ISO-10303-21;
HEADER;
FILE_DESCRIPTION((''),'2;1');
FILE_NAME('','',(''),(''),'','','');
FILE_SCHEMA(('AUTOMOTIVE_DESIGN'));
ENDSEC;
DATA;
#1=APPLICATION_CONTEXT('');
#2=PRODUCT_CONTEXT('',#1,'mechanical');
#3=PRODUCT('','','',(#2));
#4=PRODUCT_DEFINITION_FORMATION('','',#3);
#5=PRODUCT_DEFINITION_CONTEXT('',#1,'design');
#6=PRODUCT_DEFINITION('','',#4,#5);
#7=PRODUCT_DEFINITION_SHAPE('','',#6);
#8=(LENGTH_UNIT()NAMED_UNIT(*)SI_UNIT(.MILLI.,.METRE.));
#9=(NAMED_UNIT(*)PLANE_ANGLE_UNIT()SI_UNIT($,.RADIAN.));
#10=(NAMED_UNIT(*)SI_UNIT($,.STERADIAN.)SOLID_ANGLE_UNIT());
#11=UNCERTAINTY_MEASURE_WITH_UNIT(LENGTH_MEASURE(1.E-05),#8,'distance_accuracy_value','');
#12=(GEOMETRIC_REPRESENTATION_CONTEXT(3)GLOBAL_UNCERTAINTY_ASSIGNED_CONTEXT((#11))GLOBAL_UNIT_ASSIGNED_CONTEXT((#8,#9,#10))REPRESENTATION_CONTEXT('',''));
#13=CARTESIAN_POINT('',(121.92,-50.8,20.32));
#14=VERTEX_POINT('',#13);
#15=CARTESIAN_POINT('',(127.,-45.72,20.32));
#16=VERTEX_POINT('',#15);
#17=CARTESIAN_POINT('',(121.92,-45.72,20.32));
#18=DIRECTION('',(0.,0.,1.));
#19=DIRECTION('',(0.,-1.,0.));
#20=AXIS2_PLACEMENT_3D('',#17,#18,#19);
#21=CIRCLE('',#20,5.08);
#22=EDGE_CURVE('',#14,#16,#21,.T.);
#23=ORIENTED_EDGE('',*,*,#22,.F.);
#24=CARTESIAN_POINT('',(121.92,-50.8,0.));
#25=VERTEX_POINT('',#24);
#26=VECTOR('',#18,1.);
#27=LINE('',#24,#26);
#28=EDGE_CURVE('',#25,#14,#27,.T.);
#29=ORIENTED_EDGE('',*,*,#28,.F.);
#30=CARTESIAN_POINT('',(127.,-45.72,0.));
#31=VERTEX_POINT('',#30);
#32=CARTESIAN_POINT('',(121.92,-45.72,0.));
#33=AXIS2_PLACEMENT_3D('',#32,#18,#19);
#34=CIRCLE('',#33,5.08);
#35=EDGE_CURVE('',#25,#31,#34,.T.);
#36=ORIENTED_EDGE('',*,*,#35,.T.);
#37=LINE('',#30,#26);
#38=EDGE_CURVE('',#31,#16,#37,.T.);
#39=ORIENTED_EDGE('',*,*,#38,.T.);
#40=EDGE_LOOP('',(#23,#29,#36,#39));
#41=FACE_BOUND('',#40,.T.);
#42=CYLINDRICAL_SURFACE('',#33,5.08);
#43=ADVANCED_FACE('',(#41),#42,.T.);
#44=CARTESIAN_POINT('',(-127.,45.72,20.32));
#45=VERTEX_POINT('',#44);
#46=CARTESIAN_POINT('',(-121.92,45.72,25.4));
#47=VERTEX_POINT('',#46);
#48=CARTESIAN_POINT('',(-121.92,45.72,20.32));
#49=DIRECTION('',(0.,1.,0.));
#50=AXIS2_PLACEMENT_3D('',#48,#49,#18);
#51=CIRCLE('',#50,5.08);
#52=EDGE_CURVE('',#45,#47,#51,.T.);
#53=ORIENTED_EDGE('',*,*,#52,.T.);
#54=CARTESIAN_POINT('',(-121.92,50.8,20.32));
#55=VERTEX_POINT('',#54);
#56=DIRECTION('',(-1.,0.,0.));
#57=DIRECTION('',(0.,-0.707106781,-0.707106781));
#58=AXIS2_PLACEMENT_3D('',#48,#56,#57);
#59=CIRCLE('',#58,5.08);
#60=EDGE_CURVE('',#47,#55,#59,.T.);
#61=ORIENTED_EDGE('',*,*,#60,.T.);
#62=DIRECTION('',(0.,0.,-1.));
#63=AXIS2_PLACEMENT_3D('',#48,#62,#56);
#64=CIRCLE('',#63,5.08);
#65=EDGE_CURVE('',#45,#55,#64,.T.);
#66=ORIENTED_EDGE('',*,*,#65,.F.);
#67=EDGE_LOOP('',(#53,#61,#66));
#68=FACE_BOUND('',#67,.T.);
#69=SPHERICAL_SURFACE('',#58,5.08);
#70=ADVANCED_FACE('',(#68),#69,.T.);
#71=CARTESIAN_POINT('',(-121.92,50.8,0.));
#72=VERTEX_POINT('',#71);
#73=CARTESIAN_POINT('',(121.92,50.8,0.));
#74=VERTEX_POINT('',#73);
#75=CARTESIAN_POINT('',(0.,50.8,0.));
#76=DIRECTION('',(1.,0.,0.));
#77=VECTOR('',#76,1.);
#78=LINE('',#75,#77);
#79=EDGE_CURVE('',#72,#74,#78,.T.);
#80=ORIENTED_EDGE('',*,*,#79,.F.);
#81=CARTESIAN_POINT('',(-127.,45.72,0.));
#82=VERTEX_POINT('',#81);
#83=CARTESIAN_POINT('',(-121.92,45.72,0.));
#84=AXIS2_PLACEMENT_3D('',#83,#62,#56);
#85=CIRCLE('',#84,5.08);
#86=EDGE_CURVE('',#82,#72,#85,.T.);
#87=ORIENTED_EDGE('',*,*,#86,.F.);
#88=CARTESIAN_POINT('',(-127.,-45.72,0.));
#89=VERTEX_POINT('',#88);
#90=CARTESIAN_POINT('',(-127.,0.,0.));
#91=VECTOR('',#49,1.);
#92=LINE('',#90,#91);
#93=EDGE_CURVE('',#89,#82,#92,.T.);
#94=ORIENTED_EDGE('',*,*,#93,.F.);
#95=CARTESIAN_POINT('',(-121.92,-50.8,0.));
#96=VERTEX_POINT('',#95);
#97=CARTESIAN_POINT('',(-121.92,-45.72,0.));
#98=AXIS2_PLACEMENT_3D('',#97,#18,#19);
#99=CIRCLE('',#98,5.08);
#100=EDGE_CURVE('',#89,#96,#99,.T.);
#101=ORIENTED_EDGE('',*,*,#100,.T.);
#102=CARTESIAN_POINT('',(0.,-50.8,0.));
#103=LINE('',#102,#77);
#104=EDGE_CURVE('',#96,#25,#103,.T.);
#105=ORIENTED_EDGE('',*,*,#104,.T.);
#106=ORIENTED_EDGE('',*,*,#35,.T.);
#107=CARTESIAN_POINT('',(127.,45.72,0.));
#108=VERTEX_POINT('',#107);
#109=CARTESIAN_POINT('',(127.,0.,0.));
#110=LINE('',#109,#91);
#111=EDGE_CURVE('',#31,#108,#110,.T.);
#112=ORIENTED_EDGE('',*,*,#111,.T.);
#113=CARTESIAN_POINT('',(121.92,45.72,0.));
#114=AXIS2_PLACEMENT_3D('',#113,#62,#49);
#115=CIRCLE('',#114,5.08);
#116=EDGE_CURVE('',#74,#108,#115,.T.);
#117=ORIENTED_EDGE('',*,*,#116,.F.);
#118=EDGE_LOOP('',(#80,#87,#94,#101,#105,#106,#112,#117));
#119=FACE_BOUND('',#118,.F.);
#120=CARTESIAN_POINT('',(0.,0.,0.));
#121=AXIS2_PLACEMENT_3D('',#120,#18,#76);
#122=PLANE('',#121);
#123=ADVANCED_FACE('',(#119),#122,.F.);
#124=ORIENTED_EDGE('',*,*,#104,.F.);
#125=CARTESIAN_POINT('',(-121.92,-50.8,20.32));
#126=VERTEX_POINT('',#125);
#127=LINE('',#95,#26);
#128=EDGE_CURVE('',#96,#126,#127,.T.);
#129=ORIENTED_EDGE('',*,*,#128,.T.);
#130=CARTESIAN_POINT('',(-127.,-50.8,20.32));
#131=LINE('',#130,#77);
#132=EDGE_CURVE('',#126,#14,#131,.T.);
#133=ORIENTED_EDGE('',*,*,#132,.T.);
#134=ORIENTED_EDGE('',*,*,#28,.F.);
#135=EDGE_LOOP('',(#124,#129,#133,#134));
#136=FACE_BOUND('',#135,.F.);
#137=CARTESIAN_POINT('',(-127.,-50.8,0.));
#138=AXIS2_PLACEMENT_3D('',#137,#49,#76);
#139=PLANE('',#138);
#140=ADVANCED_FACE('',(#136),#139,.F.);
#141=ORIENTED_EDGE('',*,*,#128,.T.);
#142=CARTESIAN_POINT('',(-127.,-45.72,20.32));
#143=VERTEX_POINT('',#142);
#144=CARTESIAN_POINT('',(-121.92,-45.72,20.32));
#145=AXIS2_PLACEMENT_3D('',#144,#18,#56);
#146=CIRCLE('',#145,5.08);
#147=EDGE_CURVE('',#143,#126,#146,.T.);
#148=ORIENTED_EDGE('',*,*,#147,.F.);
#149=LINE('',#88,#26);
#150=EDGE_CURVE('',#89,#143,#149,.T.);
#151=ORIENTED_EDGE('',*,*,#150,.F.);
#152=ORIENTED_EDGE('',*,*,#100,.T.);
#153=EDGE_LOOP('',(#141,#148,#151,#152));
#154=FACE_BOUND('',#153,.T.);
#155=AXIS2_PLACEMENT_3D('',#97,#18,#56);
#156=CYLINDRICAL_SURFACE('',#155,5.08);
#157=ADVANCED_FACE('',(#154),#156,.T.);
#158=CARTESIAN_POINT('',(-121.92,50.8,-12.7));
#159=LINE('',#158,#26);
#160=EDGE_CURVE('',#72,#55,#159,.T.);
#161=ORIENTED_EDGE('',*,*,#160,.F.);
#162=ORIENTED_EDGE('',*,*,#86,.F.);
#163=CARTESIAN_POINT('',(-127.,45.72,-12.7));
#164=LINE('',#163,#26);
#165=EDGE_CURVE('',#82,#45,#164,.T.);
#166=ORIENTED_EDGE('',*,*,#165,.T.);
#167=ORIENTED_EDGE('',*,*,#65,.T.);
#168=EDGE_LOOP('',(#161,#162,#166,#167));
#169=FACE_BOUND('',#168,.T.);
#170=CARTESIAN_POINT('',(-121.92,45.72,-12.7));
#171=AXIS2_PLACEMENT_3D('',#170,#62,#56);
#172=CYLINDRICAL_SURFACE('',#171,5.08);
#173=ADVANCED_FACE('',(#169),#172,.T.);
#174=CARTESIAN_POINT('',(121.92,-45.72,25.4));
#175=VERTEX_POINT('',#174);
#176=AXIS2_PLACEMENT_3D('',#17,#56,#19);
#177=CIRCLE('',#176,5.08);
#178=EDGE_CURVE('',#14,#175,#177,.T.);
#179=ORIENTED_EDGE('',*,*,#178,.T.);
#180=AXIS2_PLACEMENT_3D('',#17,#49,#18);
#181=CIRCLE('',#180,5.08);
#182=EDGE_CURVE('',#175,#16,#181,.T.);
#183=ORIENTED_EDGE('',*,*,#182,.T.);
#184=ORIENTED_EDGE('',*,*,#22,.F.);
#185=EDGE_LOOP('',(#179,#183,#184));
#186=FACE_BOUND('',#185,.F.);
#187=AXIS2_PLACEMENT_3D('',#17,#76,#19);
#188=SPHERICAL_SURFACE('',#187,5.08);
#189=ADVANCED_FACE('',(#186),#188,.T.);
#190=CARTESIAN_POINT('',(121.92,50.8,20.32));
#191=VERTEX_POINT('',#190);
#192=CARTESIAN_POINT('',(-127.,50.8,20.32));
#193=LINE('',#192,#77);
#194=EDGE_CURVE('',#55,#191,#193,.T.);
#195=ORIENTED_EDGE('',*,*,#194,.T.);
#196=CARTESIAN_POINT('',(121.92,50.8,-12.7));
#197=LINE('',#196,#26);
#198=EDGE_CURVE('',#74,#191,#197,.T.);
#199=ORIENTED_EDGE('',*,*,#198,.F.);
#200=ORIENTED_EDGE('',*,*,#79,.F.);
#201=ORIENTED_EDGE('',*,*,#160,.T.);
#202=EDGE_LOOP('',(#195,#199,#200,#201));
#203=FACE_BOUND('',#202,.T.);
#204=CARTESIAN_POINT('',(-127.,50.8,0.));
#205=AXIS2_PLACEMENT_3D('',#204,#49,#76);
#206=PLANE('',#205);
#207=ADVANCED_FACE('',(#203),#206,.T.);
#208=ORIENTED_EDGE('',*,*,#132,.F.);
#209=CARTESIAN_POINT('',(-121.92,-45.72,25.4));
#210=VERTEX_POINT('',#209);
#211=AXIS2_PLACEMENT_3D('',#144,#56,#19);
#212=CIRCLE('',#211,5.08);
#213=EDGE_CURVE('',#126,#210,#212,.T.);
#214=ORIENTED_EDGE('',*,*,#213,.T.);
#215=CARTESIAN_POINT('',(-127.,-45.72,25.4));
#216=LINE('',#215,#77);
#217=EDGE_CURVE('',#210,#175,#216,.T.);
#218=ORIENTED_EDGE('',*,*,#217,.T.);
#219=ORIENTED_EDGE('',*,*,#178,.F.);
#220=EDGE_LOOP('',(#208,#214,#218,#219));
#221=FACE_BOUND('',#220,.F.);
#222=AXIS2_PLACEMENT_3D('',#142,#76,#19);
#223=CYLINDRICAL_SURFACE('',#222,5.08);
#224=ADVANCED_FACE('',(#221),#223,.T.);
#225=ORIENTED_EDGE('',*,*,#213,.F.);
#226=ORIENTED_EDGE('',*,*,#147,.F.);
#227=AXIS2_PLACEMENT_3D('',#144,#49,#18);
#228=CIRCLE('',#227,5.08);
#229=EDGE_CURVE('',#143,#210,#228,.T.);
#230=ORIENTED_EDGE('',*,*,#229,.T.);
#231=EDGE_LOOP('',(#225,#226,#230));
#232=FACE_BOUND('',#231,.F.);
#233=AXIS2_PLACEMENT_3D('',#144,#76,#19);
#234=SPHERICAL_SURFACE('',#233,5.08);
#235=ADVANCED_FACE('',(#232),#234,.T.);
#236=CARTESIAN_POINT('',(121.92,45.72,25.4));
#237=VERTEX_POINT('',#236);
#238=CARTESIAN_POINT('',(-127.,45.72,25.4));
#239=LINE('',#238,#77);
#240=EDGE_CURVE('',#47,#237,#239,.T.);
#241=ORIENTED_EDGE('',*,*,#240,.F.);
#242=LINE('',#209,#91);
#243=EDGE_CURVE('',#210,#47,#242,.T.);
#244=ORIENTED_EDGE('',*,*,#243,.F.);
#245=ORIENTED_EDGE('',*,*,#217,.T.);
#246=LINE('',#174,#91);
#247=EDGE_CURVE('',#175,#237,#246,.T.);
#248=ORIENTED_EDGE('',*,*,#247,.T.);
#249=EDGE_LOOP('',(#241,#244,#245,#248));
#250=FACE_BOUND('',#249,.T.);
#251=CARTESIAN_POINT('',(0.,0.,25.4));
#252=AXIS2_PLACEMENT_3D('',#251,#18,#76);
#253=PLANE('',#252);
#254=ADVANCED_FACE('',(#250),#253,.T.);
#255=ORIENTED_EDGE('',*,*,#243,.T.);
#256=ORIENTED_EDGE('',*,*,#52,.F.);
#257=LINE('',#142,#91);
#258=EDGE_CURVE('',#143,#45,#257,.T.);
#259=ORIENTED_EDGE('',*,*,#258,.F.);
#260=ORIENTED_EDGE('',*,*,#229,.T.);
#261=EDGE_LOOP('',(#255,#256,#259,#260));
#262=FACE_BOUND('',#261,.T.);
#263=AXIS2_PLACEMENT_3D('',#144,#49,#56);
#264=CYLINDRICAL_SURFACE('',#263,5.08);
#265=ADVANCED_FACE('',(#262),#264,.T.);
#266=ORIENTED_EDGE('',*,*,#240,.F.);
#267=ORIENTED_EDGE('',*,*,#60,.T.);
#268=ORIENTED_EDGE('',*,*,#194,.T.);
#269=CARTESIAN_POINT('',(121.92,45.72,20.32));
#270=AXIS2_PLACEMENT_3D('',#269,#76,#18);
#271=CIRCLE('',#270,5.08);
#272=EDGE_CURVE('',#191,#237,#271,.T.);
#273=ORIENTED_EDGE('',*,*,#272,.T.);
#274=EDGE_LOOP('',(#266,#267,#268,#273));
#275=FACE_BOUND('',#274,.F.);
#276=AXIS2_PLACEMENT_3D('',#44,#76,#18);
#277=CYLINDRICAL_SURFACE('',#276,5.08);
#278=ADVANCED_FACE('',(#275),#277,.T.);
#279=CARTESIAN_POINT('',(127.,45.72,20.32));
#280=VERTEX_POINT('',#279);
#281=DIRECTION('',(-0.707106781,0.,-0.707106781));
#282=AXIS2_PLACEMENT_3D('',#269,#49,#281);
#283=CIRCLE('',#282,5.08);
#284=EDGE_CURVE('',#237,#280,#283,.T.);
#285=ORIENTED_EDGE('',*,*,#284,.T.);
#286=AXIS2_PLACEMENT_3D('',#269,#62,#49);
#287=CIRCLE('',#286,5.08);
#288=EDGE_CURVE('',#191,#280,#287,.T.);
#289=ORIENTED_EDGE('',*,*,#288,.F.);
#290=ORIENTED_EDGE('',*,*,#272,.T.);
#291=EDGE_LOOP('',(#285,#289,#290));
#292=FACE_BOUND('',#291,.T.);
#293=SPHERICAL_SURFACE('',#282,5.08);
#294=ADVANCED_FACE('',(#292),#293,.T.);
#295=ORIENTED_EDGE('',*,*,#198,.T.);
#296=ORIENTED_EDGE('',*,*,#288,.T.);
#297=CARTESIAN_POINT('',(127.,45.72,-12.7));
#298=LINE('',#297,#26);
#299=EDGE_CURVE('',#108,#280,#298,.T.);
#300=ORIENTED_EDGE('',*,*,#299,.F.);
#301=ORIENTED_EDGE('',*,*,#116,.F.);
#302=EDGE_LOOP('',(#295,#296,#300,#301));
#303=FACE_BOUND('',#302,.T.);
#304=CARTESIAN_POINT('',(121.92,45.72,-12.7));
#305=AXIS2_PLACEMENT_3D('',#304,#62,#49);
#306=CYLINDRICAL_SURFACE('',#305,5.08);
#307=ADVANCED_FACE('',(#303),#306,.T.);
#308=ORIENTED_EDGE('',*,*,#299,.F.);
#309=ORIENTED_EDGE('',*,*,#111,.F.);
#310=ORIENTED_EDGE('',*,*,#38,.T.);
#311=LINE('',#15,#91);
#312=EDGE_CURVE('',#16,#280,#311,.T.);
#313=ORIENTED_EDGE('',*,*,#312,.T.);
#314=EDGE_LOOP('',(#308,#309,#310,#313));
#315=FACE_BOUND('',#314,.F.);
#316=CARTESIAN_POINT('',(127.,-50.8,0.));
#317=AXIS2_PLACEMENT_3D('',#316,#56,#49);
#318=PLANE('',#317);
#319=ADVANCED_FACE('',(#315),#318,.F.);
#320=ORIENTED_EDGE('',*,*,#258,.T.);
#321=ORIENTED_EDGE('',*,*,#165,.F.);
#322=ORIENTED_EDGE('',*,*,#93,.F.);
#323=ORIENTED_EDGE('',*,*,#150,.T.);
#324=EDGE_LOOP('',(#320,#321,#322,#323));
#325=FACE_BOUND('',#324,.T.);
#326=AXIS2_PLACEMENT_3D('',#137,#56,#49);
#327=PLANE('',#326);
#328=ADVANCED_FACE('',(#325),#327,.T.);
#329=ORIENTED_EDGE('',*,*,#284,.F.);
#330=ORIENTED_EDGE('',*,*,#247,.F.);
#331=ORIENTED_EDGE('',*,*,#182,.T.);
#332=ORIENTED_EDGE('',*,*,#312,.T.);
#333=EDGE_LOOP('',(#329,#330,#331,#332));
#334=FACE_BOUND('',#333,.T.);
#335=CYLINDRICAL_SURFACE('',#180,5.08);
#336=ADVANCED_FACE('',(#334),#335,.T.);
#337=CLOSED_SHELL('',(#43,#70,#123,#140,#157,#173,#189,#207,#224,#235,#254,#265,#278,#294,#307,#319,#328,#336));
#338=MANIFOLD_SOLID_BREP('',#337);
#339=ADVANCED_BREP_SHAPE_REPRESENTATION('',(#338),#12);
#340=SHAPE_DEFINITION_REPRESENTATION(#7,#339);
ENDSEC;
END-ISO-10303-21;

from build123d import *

# Parameters (mm, degrees)
F0_W        = 254
F0_H        = 101.6
F1_DEPTH    = 25.4
F2_R        = 5.08
F3_R        = 5.08
F4_T1_DEPTH = 33.02
F4_S5_W     = 5.08
F4_S5_H     = 5.08
F4_T6_DEPTH = 5.08
F5_T1_DEPTH = 33.02
F5_S5_W     = 5.08
F5_S5_H     = 5.08
F5_T6_DEPTH = 5.08


# Not quite as in the source:
# - a fillet or chamfer that OpenCascade refuses, or shapes differently, is made with other operations: its cross-section is extruded or revolved along the edge and cut away or added


with BuildPart() as f1:
    # F0 (on Top) → F1 (new body)
    with BuildSketch(Plane.XY):
        Rectangle(F0_W, F0_H)
    extrude(amount=F1_DEPTH)

    # F2
    f2_edges = [f1.edges().sort_by_distance(p)[0] for p in [
        (0, -50.8, 25.4),
    ]]
    fillet(f2_edges, radius=F2_R)

    # F3
    f3_edges = [f1.edges().sort_by_distance(p)[0] for p in [
        (127, 2.54, 25.4),
        (0, 50.8, 25.4),
        (-127, 2.54, 25.4),
    ]]
    fillet(f3_edges, radius=F3_R)

    # F4: fillet of radius 5.08 on 1 edges, made by hand

    # F4_s2 → F4_t1 (cut)
    with BuildSketch(Plane.XY.offset(-12.7)):
        with BuildLine():
            ThreePointArc((121.92, 50.8), (125.5121024484, 49.3121024484), (127, 45.72))
            Line((127, 45.72), (127, 50.8))
            Line((127, 50.8), (121.92, 50.8))
        make_face()
    extrude(amount=F4_T1_DEPTH, mode=Mode.SUBTRACT)


with BuildPart() as f4_tool4:
    # F4_s5 → F4_t6 (new body)
    with BuildSketch(Plane.XZ.offset(-45.72)):
        with Locations((124.46, 22.86)):
            Rectangle(F4_S5_W, F4_S5_H)
    extrude(amount=-F4_T6_DEPTH)

    # F4_s7 → F4_t8 (revolve, cut)
    with BuildSketch(Plane(origin=(121.92, 45.72, 20.32), x_dir=(-0.7071067812, 0, -0.7071067812), z_dir=(0.7071067812, 0, -0.7071067812))):
        with BuildLine():
            ThreePointArc((0, -5.08), (5.08, 0), (0, 5.08))
            Line((0, 5.08), (0, -5.08))
        make_face()
    revolve(axis=Axis((121.92, 45.72, 20.32), (0, 1, 0)), mode=Mode.SUBTRACT)


with BuildPart() as f1_1:
    add(f1.part)

    # F4_t3: cut F4_tool4
    add(f4_tool4.part, mode=Mode.SUBTRACT)

    # F5: fillet of radius 5.08 on 1 edges, made by hand

    # F5_s2 → F5_t1 (cut)
    with BuildSketch(Plane.XY.offset(-12.7)):
        with BuildLine():
            ThreePointArc((-127, 45.72), (-125.5121024484, 49.3121024484), (-121.92, 50.8))
            Line((-121.92, 50.8), (-127, 50.8))
            Line((-127, 50.8), (-127, 45.72))
        make_face()
    extrude(amount=F5_T1_DEPTH, mode=Mode.SUBTRACT)


with BuildPart() as f5_tool4:
    # F5_s5 → F5_t6 (new body)
    with BuildSketch(Plane.YZ.offset(-121.92)):
        with Locations((48.26, 22.86)):
            Rectangle(F5_S5_W, F5_S5_H)
    extrude(amount=-F5_T6_DEPTH)

    # F5_s7 → F5_t8 (revolve, cut)
    with BuildSketch(Plane(origin=(-121.92, 45.72, 20.32), x_dir=(0, -0.7071067812, -0.7071067812), z_dir=(0, 0.7071067812, -0.7071067812))):
        with BuildLine():
            ThreePointArc((0, -5.08), (5.08, 0), (0, 5.08))
            Line((0, 5.08), (0, -5.08))
        make_face()
    revolve(axis=Axis((-121.92, 45.72, 20.32), (-1, 0, 0)), mode=Mode.SUBTRACT)


with BuildPart() as f1_2:
    add(f1_1.part)

    # F5_t3: cut F5_tool4
    add(f5_tool4.part, mode=Mode.SUBTRACT)


solid = f1_2.part
